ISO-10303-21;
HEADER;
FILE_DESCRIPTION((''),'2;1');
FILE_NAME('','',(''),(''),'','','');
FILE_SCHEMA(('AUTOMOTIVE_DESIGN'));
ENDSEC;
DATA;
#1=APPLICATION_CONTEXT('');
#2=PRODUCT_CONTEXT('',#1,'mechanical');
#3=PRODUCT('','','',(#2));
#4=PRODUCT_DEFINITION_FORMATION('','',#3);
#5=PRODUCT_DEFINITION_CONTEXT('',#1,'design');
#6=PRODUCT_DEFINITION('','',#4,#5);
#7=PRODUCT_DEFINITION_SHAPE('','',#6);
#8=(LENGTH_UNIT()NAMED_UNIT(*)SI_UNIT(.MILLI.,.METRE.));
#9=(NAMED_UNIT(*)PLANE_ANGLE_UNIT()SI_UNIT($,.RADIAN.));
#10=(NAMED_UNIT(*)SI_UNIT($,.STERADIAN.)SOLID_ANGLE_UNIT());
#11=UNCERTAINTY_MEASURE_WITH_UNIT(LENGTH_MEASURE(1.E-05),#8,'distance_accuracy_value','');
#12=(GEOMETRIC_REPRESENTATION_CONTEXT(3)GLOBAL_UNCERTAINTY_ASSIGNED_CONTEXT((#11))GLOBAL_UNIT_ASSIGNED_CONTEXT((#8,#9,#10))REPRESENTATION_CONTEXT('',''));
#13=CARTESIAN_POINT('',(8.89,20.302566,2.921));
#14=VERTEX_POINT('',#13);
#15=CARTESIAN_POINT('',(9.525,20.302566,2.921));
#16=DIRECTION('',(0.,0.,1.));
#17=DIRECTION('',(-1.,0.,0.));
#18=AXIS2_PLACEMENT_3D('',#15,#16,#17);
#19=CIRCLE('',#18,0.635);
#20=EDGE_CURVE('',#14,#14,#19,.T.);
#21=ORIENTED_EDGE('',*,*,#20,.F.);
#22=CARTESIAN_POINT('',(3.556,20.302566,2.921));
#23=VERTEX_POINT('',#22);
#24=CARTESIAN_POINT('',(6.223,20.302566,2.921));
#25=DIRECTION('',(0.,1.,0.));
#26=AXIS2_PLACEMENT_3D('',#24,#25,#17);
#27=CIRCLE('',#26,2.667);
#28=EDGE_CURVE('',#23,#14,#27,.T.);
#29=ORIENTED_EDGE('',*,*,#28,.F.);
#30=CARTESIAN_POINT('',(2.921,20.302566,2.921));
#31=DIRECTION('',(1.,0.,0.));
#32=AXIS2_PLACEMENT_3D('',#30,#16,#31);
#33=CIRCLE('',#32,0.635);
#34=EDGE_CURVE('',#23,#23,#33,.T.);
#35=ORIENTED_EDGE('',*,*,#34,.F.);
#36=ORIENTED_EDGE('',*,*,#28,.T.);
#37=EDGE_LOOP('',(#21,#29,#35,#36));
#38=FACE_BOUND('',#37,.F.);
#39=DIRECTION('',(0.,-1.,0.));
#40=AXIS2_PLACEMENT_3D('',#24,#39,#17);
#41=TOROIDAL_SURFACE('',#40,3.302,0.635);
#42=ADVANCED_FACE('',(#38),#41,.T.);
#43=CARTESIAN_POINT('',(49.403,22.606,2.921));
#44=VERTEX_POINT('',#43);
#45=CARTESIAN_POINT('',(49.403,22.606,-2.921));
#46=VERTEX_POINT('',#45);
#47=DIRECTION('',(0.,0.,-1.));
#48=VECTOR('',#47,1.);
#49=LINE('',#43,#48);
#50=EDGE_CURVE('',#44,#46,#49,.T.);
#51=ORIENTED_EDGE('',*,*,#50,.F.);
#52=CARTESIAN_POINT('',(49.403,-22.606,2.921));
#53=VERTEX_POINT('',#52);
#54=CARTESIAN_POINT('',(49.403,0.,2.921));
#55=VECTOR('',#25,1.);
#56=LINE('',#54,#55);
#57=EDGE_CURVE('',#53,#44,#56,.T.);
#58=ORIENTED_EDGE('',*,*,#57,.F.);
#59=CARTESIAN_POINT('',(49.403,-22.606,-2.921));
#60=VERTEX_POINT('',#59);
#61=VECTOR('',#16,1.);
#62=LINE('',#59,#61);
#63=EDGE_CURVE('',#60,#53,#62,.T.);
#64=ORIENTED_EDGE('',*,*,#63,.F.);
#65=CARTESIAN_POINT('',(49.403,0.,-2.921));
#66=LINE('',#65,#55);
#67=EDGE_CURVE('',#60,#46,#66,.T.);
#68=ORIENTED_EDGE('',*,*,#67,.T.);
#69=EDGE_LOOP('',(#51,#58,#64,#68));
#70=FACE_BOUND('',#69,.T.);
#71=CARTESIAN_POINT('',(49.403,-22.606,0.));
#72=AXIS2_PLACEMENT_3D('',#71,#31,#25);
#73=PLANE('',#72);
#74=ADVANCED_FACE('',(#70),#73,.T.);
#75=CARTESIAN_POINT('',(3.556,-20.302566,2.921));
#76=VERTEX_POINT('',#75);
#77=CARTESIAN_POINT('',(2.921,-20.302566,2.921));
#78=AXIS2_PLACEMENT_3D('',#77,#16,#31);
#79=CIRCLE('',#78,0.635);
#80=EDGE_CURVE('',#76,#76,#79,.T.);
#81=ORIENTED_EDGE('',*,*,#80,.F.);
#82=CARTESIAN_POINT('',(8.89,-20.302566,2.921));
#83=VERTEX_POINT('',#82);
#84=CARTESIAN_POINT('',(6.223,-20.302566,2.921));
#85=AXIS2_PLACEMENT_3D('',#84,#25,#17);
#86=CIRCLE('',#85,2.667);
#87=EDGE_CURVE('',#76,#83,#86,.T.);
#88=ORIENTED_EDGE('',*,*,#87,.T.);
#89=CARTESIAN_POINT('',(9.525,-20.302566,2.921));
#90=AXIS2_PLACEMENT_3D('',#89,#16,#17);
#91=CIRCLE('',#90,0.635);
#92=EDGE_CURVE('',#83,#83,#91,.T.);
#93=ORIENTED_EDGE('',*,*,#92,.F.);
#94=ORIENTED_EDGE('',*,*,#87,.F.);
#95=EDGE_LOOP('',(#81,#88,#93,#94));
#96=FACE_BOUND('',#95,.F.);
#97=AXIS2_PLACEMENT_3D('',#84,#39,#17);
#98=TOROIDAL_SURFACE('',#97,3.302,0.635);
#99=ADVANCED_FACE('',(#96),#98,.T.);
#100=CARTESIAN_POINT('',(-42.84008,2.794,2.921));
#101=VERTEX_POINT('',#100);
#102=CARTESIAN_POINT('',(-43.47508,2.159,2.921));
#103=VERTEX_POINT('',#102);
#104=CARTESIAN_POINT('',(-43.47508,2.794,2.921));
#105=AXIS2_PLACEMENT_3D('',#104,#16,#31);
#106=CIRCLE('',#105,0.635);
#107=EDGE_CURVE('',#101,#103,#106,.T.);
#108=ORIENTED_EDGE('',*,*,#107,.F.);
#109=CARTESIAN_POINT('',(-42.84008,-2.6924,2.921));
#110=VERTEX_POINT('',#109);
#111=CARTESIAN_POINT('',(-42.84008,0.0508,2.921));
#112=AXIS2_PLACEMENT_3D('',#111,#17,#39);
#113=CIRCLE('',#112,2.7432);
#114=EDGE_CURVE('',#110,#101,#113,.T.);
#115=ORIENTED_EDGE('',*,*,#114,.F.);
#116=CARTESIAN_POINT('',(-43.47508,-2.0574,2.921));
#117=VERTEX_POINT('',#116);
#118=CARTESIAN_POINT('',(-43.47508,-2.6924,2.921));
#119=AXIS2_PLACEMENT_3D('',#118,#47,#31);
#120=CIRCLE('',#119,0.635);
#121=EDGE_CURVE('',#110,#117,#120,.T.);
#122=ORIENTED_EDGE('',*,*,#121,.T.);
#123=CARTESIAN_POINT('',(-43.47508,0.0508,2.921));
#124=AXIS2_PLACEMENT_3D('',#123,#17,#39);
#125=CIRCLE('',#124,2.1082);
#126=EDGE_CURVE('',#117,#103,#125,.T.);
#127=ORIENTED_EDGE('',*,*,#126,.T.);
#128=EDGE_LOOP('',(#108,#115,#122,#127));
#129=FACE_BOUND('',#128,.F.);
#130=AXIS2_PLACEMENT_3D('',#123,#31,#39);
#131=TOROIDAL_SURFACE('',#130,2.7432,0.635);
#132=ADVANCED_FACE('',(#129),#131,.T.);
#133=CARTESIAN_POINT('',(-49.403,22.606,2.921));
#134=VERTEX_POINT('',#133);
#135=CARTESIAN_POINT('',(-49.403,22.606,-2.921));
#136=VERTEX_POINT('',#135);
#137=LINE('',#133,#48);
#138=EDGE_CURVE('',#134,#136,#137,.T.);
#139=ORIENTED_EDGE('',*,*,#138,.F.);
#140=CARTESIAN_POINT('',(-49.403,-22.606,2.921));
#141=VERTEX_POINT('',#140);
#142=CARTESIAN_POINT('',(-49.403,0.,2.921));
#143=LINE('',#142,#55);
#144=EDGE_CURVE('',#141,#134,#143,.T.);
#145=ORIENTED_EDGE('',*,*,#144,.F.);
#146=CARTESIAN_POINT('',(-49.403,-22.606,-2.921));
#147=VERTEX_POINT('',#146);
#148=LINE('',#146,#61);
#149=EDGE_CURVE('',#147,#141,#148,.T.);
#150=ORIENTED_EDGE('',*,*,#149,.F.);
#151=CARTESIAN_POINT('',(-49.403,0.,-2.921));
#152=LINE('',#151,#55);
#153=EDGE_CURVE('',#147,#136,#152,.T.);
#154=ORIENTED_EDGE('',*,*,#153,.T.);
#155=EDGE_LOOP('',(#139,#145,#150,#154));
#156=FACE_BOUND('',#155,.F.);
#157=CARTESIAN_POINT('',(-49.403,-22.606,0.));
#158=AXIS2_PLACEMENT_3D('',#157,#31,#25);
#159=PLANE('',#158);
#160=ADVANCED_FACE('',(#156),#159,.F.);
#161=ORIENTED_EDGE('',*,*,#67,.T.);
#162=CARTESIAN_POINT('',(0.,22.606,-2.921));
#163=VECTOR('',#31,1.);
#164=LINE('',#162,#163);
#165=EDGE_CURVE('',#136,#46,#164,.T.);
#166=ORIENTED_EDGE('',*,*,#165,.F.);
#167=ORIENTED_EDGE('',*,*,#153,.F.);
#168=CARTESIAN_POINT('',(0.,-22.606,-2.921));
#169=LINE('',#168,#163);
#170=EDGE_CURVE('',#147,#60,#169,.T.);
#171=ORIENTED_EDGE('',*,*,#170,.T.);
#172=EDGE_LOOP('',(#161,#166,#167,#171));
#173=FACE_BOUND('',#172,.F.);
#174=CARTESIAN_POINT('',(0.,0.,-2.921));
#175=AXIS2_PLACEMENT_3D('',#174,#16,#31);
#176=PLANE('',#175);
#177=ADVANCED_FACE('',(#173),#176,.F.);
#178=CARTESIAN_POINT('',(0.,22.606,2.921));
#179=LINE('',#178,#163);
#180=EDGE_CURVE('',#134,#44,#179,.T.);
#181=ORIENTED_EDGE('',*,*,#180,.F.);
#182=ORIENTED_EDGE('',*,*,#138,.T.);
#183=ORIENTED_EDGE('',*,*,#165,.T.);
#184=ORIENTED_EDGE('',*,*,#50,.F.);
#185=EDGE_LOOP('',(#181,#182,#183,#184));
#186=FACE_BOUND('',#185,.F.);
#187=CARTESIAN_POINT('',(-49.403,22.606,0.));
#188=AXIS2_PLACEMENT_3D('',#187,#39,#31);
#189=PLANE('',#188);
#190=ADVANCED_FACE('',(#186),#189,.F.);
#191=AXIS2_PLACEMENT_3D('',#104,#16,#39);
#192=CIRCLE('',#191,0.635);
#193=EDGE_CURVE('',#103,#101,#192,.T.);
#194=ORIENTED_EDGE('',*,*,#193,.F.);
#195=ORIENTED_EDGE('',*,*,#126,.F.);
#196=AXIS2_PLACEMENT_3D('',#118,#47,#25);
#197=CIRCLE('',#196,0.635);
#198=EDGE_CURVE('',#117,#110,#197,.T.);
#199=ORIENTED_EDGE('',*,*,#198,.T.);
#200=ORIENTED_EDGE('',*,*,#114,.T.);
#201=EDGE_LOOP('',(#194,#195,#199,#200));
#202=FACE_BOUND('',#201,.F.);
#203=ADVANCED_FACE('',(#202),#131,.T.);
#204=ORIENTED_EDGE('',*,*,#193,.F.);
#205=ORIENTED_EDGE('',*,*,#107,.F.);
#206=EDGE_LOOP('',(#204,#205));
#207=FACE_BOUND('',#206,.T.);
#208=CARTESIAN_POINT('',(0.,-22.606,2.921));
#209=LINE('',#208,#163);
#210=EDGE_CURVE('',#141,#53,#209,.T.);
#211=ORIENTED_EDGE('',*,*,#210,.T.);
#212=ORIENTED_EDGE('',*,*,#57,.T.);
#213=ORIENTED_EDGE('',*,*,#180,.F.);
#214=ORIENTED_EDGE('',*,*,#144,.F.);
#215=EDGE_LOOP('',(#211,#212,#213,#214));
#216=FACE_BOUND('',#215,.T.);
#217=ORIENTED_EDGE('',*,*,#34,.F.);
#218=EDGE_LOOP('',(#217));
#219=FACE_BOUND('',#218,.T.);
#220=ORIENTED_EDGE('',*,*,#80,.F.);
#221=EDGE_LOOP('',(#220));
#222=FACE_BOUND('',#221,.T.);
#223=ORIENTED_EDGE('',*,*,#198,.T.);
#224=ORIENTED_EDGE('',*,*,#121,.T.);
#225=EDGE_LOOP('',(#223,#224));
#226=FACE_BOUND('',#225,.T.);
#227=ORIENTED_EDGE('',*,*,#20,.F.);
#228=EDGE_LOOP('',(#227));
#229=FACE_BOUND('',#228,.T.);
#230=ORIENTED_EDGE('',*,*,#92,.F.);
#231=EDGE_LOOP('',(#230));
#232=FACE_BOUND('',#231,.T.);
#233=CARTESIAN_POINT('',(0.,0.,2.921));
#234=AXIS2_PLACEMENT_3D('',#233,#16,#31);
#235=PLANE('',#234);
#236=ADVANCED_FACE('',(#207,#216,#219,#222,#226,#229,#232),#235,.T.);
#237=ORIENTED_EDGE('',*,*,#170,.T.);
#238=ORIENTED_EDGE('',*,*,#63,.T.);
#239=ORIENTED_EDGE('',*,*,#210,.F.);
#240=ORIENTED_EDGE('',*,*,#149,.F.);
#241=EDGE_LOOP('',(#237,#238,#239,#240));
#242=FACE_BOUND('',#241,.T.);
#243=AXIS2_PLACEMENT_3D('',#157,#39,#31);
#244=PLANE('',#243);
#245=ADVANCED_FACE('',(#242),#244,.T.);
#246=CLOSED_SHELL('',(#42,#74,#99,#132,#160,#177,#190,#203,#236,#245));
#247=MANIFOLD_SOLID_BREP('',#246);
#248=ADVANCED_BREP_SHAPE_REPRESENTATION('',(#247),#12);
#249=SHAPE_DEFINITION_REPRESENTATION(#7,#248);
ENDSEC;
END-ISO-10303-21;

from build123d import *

# Parameters (mm, degrees)
F0_W     = 98.806
F0_H     = 45.212
F1_DEPTH = 2.921
F3_ANGLE = 180
F6_R     = 0.635


# Not quite as in the source:
# - the program builds the solid bodies; features that only make, move or delete a surface that nothing else refers to are left out


with BuildPart() as f1:
    # F0 (on Top) → F1 (new body, symmetric)
    with BuildSketch(Plane.XY):
        Rectangle(F0_W, F0_H)
    extrude(amount=F1_DEPTH, both=True)

    # F2 (on face) → F3 (revolve)
    with BuildSketch(Plane.XY.offset(2.921)):
        with BuildLine():
            ThreePointArc((-43.4750802815, 2.159), (-43.0260674754, 2.3449871939), (-42.8400802815, 2.794))
            ThreePointArc((-42.8400802815, 2.794), (-43.9240930875, 3.2430128061), (-43.4750802815, 2.159))
        make_face()
        with BuildLine():
            ThreePointArc((-42.8400802815, -2.6924), (-43.0260674754, -2.2433871939), (-43.4750802815, -2.0574))
            ThreePointArc((-43.4750802815, -2.0574), (-43.9240930875, -3.1414128061), (-42.8400802815, -2.6924))
        make_face()
    revolve(axis=Axis((-43.6497014016, 0.0508, 2.921), (-1, 0, 0)), revolution_arc=F3_ANGLE)

    # F6 (on face) → F7 (revolve)
    with BuildSketch(Plane.XY.offset(2.921)):
        with Locations((2.921, -20.3025657684)):
            Circle(F6_R)
        with BuildLine():
            ThreePointArc((10.16, -20.3025657684), (9.525, -19.6675657684), (8.89, -20.3025657684))
            ThreePointArc((8.89, -20.3025657684), (9.525, -20.9375657684), (10.16, -20.3025657684))
        make_face()
        with Locations((2.921, 20.3025657684)):
            Circle(F6_R)
        with BuildLine():
            ThreePointArc((10.16, 20.3025657684), (9.525, 20.9375657684), (8.89, 20.3025657684))
            ThreePointArc((8.89, 20.3025657684), (9.525, 19.6675657684), (10.16, 20.3025657684))
        make_face()
    revolve(axis=Axis((6.223, -20.2974760905, 2.921), (0, 1, 0)))


solid = f1.part
